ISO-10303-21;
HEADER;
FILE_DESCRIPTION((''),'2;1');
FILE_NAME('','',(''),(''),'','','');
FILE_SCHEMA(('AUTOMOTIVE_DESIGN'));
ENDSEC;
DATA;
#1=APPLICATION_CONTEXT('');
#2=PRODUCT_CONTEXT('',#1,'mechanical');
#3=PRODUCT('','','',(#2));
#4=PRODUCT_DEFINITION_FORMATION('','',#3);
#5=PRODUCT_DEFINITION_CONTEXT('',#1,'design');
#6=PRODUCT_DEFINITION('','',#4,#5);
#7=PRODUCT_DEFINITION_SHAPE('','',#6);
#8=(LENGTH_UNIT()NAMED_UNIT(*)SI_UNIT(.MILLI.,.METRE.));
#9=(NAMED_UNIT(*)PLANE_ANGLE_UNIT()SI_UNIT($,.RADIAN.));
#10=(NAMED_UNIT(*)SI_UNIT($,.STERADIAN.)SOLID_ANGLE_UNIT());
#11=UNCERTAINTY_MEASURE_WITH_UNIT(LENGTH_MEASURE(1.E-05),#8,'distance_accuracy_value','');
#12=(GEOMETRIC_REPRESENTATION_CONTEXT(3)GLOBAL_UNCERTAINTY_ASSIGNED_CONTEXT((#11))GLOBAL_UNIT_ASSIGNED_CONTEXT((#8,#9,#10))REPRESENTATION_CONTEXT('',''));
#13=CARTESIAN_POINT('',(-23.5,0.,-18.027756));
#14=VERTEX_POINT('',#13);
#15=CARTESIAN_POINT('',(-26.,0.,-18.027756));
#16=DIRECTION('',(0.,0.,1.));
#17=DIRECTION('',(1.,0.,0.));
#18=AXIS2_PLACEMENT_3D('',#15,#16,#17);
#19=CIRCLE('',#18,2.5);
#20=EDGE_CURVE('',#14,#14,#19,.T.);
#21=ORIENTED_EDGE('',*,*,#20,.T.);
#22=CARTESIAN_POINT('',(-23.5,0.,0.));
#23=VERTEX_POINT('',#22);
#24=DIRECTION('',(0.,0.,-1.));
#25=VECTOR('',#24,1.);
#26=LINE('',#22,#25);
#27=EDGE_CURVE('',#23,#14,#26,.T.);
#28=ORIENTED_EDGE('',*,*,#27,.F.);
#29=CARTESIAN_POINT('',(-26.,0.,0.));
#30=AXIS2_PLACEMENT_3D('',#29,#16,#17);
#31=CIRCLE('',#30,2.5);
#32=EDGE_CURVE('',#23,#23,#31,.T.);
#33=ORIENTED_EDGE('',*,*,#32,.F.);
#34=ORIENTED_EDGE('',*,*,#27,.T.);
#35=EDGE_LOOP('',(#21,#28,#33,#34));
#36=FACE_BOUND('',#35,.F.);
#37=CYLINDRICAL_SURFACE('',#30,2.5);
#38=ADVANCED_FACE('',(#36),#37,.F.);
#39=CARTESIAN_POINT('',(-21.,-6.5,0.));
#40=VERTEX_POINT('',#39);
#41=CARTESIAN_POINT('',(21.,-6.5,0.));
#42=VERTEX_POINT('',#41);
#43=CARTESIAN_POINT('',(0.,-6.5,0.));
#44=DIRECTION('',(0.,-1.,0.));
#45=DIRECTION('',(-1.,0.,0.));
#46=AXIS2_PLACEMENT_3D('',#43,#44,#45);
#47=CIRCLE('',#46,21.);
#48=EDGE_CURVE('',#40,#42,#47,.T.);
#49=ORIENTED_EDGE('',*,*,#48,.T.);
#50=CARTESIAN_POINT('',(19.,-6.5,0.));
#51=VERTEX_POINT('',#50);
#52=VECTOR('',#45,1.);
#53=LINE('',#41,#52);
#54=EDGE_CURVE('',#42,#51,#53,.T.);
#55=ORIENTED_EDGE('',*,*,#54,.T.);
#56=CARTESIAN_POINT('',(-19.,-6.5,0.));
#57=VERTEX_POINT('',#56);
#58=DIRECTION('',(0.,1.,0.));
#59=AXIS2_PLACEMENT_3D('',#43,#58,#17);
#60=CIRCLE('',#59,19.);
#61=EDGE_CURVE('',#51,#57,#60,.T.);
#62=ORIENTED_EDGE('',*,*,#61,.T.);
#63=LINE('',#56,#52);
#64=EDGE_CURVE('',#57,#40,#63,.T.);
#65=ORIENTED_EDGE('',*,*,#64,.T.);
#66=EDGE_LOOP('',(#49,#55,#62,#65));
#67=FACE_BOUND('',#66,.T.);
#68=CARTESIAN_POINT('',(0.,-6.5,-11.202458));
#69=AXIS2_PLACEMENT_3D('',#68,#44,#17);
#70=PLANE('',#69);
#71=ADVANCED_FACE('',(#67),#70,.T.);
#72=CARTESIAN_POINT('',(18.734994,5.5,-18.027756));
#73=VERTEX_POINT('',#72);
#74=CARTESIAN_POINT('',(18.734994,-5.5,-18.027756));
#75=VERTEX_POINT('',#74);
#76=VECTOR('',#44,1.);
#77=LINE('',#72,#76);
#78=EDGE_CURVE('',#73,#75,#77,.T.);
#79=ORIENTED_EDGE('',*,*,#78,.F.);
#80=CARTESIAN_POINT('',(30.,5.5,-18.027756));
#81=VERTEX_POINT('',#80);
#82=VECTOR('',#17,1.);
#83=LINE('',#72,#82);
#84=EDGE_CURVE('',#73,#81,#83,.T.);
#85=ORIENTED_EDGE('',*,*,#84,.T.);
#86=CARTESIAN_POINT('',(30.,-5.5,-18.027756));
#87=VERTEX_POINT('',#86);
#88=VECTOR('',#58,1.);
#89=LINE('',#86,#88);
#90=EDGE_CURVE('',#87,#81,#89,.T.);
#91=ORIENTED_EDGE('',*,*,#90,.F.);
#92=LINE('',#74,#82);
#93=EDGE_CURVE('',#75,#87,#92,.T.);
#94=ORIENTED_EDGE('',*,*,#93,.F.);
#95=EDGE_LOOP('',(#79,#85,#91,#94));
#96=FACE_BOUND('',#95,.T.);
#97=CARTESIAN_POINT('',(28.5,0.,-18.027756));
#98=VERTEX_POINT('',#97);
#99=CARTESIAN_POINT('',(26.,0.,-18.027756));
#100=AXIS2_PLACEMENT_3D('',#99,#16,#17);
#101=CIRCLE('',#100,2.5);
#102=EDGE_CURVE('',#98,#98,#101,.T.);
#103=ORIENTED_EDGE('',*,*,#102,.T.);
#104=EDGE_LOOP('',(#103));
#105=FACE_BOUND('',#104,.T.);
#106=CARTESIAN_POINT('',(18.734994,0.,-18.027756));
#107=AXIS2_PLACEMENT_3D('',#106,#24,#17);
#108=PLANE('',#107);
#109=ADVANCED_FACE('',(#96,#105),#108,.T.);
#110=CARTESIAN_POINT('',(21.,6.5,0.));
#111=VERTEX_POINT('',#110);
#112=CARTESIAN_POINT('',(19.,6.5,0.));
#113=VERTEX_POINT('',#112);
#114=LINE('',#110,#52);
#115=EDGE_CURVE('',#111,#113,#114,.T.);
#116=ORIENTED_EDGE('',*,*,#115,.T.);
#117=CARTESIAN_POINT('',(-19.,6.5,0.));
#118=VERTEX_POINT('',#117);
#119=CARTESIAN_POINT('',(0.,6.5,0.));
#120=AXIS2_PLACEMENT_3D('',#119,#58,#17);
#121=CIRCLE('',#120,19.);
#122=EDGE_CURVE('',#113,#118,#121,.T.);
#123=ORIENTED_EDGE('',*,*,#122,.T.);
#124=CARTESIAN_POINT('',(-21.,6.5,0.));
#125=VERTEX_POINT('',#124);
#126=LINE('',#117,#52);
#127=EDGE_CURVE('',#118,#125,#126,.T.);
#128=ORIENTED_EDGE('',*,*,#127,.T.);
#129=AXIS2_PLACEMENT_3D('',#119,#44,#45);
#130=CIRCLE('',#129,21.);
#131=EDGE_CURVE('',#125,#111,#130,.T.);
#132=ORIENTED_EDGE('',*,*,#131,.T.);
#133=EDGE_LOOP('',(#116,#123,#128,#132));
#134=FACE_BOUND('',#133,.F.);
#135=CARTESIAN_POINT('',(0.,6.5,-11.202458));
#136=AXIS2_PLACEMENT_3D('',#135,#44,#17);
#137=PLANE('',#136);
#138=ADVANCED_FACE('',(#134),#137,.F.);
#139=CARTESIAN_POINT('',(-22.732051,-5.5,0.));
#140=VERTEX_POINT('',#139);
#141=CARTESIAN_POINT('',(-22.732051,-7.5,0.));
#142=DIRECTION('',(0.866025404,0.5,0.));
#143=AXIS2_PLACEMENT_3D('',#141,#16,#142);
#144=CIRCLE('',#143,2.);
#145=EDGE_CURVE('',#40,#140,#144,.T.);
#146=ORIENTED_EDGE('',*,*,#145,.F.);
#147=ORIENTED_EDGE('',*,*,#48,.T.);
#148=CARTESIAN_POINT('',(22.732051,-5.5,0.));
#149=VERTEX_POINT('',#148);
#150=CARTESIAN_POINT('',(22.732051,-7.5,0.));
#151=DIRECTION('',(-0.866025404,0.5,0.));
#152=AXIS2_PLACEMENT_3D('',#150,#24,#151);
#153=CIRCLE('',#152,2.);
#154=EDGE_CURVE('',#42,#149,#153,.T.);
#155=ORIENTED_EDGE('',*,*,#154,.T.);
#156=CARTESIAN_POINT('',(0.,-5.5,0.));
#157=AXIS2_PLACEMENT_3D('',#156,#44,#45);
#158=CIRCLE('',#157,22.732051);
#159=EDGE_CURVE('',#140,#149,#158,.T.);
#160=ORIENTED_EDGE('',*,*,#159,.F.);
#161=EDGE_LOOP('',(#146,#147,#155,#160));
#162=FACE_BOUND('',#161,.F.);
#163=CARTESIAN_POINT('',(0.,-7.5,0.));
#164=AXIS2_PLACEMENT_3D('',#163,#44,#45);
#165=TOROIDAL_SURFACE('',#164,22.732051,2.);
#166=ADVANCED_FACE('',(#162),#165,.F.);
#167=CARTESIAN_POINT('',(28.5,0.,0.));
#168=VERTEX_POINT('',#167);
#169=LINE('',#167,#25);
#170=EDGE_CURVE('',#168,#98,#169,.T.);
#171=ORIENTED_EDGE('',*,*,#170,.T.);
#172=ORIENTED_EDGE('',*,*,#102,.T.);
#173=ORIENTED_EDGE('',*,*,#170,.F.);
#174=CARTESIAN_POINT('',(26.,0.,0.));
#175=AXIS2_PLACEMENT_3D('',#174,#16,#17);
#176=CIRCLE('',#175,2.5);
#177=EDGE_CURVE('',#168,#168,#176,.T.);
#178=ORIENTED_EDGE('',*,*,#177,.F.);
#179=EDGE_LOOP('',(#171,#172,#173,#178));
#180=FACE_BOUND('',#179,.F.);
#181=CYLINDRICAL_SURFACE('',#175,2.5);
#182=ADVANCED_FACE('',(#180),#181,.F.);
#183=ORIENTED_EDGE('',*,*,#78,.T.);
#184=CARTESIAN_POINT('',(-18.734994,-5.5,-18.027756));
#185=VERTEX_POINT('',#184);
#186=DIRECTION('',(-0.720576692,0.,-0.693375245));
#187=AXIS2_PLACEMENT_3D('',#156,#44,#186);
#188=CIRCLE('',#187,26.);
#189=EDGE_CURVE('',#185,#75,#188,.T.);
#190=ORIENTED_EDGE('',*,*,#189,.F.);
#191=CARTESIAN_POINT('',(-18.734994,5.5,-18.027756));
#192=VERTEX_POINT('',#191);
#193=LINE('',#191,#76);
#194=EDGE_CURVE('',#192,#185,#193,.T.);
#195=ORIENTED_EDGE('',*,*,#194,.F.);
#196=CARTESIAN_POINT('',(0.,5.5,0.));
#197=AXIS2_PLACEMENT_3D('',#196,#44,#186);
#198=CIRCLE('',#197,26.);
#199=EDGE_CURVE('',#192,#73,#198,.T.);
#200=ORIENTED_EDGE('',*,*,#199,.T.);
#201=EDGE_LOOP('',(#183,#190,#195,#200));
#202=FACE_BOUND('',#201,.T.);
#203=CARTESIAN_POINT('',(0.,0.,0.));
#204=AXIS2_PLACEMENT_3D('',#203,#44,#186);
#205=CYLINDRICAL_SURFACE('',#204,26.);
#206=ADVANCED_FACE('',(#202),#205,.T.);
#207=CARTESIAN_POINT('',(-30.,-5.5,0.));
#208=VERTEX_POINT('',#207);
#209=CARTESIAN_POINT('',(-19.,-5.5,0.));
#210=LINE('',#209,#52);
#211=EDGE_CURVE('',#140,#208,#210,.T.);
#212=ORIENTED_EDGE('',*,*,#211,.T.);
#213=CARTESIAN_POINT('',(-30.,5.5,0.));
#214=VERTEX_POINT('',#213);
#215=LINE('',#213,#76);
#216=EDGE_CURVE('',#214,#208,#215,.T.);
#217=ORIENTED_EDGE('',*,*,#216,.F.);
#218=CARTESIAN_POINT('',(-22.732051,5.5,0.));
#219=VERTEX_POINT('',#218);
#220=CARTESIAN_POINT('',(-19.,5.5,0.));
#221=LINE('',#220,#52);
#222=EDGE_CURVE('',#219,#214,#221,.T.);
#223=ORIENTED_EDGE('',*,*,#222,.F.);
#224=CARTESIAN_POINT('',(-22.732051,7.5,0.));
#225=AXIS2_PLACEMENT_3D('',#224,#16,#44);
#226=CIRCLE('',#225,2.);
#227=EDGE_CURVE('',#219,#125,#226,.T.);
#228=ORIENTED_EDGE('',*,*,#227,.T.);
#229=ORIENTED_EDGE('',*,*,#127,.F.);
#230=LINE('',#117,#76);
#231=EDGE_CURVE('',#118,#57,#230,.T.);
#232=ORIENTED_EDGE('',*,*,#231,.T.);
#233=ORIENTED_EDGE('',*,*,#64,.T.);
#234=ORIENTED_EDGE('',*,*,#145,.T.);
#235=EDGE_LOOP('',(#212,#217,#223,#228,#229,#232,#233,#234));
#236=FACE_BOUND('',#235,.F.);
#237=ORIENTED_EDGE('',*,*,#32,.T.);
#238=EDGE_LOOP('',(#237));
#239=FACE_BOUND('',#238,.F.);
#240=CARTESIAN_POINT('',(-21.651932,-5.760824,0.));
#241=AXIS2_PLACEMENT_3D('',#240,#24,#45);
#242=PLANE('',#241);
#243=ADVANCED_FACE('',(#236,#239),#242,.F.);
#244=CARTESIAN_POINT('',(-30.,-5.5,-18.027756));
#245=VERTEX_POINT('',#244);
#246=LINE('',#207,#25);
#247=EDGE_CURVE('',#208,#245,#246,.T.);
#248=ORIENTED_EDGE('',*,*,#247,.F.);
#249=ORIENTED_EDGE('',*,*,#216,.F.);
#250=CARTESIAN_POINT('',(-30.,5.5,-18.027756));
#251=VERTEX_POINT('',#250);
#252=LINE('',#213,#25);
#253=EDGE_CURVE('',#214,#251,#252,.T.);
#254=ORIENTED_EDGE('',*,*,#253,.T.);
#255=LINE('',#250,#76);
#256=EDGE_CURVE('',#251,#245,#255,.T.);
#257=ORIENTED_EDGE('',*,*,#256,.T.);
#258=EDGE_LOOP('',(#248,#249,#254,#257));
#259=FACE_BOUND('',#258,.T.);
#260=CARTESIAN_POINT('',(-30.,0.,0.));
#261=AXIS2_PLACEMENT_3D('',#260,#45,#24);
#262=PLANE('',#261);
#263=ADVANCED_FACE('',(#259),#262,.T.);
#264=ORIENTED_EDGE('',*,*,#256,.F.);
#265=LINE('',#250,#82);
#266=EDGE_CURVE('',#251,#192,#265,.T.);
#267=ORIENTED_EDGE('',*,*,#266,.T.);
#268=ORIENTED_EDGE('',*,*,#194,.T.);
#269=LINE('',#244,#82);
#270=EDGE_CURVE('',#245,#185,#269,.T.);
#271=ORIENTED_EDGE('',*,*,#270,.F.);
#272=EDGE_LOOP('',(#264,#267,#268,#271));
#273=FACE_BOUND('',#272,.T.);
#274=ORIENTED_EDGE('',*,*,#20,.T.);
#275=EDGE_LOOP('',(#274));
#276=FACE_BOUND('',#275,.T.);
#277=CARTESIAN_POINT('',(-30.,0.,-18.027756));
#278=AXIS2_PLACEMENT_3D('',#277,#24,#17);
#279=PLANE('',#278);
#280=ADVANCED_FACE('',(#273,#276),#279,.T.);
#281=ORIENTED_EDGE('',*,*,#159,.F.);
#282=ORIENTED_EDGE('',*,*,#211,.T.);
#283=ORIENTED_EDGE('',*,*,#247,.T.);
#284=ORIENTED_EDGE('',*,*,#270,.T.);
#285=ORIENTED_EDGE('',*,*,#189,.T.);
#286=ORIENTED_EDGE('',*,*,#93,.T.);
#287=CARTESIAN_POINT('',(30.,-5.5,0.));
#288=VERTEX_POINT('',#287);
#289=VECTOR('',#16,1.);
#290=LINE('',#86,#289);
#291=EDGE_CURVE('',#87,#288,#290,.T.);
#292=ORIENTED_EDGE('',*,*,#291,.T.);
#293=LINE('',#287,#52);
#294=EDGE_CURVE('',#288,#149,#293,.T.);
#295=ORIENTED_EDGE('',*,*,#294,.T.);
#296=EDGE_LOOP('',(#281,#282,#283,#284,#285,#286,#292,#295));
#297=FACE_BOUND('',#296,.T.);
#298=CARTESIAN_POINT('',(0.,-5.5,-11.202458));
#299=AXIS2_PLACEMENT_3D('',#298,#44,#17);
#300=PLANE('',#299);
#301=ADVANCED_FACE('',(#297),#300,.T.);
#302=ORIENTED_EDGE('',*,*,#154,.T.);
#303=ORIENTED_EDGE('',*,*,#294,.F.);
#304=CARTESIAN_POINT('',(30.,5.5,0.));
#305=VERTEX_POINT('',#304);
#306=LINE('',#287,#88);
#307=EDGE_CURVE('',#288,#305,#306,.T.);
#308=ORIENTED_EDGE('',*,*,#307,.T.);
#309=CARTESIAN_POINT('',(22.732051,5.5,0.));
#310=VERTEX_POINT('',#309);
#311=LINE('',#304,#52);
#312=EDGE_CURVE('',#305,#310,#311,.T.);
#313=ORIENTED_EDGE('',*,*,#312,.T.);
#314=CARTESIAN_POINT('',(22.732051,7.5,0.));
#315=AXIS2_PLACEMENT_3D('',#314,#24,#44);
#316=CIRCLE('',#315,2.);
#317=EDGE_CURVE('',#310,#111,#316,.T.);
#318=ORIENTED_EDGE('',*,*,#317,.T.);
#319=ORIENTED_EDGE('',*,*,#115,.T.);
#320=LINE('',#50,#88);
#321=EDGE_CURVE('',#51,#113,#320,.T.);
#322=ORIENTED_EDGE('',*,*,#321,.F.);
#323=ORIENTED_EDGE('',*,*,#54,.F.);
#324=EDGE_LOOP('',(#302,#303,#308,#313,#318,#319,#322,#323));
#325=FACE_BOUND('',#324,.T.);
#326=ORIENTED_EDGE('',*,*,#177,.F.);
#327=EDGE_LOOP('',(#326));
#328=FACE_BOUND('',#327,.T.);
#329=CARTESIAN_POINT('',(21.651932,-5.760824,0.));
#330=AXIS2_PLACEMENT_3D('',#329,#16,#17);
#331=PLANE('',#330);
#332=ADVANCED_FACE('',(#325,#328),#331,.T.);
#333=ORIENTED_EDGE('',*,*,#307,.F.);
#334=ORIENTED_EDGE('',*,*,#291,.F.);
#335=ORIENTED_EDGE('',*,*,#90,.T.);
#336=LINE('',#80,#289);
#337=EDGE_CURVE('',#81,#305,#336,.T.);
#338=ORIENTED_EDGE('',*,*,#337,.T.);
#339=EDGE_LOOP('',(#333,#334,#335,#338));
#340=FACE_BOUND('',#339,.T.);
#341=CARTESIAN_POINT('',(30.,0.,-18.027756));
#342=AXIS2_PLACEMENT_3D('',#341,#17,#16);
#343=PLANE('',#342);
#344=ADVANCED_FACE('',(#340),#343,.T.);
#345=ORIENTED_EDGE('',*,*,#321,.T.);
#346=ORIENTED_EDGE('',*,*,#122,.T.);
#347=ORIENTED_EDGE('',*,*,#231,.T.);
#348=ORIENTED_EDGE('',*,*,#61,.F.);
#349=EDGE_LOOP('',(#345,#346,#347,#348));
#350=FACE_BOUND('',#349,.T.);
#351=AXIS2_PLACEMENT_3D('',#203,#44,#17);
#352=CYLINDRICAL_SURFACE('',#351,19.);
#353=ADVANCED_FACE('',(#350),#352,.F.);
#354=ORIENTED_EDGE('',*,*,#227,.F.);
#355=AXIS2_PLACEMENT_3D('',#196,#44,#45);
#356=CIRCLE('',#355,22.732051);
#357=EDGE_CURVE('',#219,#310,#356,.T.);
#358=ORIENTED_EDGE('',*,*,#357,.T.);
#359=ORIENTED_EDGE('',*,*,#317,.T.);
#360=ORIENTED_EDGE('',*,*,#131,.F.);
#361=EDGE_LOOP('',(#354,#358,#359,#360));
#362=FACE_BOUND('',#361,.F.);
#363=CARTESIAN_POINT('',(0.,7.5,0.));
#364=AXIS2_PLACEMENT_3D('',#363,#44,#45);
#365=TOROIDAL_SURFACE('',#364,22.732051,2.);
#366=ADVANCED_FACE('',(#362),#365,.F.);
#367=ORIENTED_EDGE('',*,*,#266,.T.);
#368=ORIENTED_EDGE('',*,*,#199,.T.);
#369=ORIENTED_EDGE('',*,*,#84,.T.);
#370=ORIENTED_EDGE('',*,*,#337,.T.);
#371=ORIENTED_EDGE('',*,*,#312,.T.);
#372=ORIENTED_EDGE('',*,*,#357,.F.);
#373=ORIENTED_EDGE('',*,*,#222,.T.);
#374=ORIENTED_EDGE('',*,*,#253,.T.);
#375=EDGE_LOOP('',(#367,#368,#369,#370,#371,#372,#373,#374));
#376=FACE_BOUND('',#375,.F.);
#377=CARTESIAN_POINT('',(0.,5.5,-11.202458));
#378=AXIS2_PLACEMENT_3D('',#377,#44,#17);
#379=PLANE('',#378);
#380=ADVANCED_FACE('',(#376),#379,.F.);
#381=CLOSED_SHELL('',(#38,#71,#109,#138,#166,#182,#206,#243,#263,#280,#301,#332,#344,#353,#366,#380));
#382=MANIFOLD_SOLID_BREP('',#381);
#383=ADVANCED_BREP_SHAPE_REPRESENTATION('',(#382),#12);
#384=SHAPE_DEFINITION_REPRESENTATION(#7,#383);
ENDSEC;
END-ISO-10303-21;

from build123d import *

# Parameters (mm, degrees)
F1_DEPTH    = 5.5
F2_DEPTH    = 6.5
F3_T2_ANGLE = 180
F3_T4_ANGLE = 180
F4_R        = 2.5
F5_DEPTH    = 25.4


# Not quite as in the source:
# - a fillet or chamfer that OpenCascade refuses, or shapes differently, is made with other operations: its cross-section is extruded or revolved along the edge and cut away or added


with BuildPart() as f1:
    # F0 (on Front) → F1 (new body, symmetric)
    with BuildSketch(Plane.XZ):
        with BuildLine():
            ThreePointArc((19, 0), (0, -19), (-19, 0))
            Line((-19, 0), (-21, 0))
            ThreePointArc((-21, 0), (0, -21), (21, 0))
            Line((21, 0), (19, 0))
        make_face()
        with BuildLine():
            ThreePointArc((21, 0), (0, -21), (-21, 0))
            Line((-21, 0), (-30, 0))
            Line((-30, 0), (-30, -18.0277563773))
            Line((-30, -18.0277563773), (-18.7349939952, -18.0277563773))
            ThreePointArc((-18.7349939952, -18.0277563773), (0, -26), (18.7349939952, -18.0277563773))
            Line((18.7349939952, -18.0277563773), (30, -18.0277563773))
            Line((30, -18.0277563773), (30, 0))
            Line((30, 0), (21, 0))
        make_face()
    extrude(amount=F1_DEPTH, both=True)

    # F0 (on Front) → F2 (join, symmetric)
    with BuildSketch(Plane.XZ):
        with BuildLine():
            ThreePointArc((19, 0), (0, -19), (-19, 0))
            Line((-19, 0), (-21, 0))
            ThreePointArc((-21, 0), (0, -21), (21, 0))
            Line((21, 0), (19, 0))
        make_face()
    extrude(amount=F2_DEPTH, both=True)

    # F3: fillet of radius 2 on 2 edges, made by hand

    # F3_s1 → F3_t2 (revolve)
    with BuildSketch(Plane.XY):
        with BuildLine():
            ThreePointArc((-22.7320508076, 5.5), (-21.7320508076, 5.7679491924), (-21, 6.5))
            Line((-21, 6.5), (-21, 5.5))
            Line((-21, 5.5), (-22.7320508076, 5.5))
        make_face()
    revolve(axis=Axis((0, 5.5, 0), (0, -1, 0)), revolution_arc=F3_T2_ANGLE)

    # F3_s3 → F3_t4 (revolve)
    with BuildSketch(Plane.XY):
        with BuildLine():
            ThreePointArc((-21, -6.5), (-21.7320508076, -5.7679491924), (-22.7320508076, -5.5))
            Line((-22.7320508076, -5.5), (-21, -5.5))
            Line((-21, -5.5), (-21, -6.5))
        make_face()
    revolve(axis=Axis((0, -5.5, 0), (0, -1, 0)), revolution_arc=F3_T4_ANGLE)

    # F4 (on Top) → F5 (cut)
    with BuildSketch(Plane.XY):
        with Locations((-26, 0)):
            Circle(F4_R)
        with Locations((26, 0)):
            Circle(F4_R)
    extrude(amount=-F5_DEPTH, mode=Mode.SUBTRACT)


solid = f1.part
